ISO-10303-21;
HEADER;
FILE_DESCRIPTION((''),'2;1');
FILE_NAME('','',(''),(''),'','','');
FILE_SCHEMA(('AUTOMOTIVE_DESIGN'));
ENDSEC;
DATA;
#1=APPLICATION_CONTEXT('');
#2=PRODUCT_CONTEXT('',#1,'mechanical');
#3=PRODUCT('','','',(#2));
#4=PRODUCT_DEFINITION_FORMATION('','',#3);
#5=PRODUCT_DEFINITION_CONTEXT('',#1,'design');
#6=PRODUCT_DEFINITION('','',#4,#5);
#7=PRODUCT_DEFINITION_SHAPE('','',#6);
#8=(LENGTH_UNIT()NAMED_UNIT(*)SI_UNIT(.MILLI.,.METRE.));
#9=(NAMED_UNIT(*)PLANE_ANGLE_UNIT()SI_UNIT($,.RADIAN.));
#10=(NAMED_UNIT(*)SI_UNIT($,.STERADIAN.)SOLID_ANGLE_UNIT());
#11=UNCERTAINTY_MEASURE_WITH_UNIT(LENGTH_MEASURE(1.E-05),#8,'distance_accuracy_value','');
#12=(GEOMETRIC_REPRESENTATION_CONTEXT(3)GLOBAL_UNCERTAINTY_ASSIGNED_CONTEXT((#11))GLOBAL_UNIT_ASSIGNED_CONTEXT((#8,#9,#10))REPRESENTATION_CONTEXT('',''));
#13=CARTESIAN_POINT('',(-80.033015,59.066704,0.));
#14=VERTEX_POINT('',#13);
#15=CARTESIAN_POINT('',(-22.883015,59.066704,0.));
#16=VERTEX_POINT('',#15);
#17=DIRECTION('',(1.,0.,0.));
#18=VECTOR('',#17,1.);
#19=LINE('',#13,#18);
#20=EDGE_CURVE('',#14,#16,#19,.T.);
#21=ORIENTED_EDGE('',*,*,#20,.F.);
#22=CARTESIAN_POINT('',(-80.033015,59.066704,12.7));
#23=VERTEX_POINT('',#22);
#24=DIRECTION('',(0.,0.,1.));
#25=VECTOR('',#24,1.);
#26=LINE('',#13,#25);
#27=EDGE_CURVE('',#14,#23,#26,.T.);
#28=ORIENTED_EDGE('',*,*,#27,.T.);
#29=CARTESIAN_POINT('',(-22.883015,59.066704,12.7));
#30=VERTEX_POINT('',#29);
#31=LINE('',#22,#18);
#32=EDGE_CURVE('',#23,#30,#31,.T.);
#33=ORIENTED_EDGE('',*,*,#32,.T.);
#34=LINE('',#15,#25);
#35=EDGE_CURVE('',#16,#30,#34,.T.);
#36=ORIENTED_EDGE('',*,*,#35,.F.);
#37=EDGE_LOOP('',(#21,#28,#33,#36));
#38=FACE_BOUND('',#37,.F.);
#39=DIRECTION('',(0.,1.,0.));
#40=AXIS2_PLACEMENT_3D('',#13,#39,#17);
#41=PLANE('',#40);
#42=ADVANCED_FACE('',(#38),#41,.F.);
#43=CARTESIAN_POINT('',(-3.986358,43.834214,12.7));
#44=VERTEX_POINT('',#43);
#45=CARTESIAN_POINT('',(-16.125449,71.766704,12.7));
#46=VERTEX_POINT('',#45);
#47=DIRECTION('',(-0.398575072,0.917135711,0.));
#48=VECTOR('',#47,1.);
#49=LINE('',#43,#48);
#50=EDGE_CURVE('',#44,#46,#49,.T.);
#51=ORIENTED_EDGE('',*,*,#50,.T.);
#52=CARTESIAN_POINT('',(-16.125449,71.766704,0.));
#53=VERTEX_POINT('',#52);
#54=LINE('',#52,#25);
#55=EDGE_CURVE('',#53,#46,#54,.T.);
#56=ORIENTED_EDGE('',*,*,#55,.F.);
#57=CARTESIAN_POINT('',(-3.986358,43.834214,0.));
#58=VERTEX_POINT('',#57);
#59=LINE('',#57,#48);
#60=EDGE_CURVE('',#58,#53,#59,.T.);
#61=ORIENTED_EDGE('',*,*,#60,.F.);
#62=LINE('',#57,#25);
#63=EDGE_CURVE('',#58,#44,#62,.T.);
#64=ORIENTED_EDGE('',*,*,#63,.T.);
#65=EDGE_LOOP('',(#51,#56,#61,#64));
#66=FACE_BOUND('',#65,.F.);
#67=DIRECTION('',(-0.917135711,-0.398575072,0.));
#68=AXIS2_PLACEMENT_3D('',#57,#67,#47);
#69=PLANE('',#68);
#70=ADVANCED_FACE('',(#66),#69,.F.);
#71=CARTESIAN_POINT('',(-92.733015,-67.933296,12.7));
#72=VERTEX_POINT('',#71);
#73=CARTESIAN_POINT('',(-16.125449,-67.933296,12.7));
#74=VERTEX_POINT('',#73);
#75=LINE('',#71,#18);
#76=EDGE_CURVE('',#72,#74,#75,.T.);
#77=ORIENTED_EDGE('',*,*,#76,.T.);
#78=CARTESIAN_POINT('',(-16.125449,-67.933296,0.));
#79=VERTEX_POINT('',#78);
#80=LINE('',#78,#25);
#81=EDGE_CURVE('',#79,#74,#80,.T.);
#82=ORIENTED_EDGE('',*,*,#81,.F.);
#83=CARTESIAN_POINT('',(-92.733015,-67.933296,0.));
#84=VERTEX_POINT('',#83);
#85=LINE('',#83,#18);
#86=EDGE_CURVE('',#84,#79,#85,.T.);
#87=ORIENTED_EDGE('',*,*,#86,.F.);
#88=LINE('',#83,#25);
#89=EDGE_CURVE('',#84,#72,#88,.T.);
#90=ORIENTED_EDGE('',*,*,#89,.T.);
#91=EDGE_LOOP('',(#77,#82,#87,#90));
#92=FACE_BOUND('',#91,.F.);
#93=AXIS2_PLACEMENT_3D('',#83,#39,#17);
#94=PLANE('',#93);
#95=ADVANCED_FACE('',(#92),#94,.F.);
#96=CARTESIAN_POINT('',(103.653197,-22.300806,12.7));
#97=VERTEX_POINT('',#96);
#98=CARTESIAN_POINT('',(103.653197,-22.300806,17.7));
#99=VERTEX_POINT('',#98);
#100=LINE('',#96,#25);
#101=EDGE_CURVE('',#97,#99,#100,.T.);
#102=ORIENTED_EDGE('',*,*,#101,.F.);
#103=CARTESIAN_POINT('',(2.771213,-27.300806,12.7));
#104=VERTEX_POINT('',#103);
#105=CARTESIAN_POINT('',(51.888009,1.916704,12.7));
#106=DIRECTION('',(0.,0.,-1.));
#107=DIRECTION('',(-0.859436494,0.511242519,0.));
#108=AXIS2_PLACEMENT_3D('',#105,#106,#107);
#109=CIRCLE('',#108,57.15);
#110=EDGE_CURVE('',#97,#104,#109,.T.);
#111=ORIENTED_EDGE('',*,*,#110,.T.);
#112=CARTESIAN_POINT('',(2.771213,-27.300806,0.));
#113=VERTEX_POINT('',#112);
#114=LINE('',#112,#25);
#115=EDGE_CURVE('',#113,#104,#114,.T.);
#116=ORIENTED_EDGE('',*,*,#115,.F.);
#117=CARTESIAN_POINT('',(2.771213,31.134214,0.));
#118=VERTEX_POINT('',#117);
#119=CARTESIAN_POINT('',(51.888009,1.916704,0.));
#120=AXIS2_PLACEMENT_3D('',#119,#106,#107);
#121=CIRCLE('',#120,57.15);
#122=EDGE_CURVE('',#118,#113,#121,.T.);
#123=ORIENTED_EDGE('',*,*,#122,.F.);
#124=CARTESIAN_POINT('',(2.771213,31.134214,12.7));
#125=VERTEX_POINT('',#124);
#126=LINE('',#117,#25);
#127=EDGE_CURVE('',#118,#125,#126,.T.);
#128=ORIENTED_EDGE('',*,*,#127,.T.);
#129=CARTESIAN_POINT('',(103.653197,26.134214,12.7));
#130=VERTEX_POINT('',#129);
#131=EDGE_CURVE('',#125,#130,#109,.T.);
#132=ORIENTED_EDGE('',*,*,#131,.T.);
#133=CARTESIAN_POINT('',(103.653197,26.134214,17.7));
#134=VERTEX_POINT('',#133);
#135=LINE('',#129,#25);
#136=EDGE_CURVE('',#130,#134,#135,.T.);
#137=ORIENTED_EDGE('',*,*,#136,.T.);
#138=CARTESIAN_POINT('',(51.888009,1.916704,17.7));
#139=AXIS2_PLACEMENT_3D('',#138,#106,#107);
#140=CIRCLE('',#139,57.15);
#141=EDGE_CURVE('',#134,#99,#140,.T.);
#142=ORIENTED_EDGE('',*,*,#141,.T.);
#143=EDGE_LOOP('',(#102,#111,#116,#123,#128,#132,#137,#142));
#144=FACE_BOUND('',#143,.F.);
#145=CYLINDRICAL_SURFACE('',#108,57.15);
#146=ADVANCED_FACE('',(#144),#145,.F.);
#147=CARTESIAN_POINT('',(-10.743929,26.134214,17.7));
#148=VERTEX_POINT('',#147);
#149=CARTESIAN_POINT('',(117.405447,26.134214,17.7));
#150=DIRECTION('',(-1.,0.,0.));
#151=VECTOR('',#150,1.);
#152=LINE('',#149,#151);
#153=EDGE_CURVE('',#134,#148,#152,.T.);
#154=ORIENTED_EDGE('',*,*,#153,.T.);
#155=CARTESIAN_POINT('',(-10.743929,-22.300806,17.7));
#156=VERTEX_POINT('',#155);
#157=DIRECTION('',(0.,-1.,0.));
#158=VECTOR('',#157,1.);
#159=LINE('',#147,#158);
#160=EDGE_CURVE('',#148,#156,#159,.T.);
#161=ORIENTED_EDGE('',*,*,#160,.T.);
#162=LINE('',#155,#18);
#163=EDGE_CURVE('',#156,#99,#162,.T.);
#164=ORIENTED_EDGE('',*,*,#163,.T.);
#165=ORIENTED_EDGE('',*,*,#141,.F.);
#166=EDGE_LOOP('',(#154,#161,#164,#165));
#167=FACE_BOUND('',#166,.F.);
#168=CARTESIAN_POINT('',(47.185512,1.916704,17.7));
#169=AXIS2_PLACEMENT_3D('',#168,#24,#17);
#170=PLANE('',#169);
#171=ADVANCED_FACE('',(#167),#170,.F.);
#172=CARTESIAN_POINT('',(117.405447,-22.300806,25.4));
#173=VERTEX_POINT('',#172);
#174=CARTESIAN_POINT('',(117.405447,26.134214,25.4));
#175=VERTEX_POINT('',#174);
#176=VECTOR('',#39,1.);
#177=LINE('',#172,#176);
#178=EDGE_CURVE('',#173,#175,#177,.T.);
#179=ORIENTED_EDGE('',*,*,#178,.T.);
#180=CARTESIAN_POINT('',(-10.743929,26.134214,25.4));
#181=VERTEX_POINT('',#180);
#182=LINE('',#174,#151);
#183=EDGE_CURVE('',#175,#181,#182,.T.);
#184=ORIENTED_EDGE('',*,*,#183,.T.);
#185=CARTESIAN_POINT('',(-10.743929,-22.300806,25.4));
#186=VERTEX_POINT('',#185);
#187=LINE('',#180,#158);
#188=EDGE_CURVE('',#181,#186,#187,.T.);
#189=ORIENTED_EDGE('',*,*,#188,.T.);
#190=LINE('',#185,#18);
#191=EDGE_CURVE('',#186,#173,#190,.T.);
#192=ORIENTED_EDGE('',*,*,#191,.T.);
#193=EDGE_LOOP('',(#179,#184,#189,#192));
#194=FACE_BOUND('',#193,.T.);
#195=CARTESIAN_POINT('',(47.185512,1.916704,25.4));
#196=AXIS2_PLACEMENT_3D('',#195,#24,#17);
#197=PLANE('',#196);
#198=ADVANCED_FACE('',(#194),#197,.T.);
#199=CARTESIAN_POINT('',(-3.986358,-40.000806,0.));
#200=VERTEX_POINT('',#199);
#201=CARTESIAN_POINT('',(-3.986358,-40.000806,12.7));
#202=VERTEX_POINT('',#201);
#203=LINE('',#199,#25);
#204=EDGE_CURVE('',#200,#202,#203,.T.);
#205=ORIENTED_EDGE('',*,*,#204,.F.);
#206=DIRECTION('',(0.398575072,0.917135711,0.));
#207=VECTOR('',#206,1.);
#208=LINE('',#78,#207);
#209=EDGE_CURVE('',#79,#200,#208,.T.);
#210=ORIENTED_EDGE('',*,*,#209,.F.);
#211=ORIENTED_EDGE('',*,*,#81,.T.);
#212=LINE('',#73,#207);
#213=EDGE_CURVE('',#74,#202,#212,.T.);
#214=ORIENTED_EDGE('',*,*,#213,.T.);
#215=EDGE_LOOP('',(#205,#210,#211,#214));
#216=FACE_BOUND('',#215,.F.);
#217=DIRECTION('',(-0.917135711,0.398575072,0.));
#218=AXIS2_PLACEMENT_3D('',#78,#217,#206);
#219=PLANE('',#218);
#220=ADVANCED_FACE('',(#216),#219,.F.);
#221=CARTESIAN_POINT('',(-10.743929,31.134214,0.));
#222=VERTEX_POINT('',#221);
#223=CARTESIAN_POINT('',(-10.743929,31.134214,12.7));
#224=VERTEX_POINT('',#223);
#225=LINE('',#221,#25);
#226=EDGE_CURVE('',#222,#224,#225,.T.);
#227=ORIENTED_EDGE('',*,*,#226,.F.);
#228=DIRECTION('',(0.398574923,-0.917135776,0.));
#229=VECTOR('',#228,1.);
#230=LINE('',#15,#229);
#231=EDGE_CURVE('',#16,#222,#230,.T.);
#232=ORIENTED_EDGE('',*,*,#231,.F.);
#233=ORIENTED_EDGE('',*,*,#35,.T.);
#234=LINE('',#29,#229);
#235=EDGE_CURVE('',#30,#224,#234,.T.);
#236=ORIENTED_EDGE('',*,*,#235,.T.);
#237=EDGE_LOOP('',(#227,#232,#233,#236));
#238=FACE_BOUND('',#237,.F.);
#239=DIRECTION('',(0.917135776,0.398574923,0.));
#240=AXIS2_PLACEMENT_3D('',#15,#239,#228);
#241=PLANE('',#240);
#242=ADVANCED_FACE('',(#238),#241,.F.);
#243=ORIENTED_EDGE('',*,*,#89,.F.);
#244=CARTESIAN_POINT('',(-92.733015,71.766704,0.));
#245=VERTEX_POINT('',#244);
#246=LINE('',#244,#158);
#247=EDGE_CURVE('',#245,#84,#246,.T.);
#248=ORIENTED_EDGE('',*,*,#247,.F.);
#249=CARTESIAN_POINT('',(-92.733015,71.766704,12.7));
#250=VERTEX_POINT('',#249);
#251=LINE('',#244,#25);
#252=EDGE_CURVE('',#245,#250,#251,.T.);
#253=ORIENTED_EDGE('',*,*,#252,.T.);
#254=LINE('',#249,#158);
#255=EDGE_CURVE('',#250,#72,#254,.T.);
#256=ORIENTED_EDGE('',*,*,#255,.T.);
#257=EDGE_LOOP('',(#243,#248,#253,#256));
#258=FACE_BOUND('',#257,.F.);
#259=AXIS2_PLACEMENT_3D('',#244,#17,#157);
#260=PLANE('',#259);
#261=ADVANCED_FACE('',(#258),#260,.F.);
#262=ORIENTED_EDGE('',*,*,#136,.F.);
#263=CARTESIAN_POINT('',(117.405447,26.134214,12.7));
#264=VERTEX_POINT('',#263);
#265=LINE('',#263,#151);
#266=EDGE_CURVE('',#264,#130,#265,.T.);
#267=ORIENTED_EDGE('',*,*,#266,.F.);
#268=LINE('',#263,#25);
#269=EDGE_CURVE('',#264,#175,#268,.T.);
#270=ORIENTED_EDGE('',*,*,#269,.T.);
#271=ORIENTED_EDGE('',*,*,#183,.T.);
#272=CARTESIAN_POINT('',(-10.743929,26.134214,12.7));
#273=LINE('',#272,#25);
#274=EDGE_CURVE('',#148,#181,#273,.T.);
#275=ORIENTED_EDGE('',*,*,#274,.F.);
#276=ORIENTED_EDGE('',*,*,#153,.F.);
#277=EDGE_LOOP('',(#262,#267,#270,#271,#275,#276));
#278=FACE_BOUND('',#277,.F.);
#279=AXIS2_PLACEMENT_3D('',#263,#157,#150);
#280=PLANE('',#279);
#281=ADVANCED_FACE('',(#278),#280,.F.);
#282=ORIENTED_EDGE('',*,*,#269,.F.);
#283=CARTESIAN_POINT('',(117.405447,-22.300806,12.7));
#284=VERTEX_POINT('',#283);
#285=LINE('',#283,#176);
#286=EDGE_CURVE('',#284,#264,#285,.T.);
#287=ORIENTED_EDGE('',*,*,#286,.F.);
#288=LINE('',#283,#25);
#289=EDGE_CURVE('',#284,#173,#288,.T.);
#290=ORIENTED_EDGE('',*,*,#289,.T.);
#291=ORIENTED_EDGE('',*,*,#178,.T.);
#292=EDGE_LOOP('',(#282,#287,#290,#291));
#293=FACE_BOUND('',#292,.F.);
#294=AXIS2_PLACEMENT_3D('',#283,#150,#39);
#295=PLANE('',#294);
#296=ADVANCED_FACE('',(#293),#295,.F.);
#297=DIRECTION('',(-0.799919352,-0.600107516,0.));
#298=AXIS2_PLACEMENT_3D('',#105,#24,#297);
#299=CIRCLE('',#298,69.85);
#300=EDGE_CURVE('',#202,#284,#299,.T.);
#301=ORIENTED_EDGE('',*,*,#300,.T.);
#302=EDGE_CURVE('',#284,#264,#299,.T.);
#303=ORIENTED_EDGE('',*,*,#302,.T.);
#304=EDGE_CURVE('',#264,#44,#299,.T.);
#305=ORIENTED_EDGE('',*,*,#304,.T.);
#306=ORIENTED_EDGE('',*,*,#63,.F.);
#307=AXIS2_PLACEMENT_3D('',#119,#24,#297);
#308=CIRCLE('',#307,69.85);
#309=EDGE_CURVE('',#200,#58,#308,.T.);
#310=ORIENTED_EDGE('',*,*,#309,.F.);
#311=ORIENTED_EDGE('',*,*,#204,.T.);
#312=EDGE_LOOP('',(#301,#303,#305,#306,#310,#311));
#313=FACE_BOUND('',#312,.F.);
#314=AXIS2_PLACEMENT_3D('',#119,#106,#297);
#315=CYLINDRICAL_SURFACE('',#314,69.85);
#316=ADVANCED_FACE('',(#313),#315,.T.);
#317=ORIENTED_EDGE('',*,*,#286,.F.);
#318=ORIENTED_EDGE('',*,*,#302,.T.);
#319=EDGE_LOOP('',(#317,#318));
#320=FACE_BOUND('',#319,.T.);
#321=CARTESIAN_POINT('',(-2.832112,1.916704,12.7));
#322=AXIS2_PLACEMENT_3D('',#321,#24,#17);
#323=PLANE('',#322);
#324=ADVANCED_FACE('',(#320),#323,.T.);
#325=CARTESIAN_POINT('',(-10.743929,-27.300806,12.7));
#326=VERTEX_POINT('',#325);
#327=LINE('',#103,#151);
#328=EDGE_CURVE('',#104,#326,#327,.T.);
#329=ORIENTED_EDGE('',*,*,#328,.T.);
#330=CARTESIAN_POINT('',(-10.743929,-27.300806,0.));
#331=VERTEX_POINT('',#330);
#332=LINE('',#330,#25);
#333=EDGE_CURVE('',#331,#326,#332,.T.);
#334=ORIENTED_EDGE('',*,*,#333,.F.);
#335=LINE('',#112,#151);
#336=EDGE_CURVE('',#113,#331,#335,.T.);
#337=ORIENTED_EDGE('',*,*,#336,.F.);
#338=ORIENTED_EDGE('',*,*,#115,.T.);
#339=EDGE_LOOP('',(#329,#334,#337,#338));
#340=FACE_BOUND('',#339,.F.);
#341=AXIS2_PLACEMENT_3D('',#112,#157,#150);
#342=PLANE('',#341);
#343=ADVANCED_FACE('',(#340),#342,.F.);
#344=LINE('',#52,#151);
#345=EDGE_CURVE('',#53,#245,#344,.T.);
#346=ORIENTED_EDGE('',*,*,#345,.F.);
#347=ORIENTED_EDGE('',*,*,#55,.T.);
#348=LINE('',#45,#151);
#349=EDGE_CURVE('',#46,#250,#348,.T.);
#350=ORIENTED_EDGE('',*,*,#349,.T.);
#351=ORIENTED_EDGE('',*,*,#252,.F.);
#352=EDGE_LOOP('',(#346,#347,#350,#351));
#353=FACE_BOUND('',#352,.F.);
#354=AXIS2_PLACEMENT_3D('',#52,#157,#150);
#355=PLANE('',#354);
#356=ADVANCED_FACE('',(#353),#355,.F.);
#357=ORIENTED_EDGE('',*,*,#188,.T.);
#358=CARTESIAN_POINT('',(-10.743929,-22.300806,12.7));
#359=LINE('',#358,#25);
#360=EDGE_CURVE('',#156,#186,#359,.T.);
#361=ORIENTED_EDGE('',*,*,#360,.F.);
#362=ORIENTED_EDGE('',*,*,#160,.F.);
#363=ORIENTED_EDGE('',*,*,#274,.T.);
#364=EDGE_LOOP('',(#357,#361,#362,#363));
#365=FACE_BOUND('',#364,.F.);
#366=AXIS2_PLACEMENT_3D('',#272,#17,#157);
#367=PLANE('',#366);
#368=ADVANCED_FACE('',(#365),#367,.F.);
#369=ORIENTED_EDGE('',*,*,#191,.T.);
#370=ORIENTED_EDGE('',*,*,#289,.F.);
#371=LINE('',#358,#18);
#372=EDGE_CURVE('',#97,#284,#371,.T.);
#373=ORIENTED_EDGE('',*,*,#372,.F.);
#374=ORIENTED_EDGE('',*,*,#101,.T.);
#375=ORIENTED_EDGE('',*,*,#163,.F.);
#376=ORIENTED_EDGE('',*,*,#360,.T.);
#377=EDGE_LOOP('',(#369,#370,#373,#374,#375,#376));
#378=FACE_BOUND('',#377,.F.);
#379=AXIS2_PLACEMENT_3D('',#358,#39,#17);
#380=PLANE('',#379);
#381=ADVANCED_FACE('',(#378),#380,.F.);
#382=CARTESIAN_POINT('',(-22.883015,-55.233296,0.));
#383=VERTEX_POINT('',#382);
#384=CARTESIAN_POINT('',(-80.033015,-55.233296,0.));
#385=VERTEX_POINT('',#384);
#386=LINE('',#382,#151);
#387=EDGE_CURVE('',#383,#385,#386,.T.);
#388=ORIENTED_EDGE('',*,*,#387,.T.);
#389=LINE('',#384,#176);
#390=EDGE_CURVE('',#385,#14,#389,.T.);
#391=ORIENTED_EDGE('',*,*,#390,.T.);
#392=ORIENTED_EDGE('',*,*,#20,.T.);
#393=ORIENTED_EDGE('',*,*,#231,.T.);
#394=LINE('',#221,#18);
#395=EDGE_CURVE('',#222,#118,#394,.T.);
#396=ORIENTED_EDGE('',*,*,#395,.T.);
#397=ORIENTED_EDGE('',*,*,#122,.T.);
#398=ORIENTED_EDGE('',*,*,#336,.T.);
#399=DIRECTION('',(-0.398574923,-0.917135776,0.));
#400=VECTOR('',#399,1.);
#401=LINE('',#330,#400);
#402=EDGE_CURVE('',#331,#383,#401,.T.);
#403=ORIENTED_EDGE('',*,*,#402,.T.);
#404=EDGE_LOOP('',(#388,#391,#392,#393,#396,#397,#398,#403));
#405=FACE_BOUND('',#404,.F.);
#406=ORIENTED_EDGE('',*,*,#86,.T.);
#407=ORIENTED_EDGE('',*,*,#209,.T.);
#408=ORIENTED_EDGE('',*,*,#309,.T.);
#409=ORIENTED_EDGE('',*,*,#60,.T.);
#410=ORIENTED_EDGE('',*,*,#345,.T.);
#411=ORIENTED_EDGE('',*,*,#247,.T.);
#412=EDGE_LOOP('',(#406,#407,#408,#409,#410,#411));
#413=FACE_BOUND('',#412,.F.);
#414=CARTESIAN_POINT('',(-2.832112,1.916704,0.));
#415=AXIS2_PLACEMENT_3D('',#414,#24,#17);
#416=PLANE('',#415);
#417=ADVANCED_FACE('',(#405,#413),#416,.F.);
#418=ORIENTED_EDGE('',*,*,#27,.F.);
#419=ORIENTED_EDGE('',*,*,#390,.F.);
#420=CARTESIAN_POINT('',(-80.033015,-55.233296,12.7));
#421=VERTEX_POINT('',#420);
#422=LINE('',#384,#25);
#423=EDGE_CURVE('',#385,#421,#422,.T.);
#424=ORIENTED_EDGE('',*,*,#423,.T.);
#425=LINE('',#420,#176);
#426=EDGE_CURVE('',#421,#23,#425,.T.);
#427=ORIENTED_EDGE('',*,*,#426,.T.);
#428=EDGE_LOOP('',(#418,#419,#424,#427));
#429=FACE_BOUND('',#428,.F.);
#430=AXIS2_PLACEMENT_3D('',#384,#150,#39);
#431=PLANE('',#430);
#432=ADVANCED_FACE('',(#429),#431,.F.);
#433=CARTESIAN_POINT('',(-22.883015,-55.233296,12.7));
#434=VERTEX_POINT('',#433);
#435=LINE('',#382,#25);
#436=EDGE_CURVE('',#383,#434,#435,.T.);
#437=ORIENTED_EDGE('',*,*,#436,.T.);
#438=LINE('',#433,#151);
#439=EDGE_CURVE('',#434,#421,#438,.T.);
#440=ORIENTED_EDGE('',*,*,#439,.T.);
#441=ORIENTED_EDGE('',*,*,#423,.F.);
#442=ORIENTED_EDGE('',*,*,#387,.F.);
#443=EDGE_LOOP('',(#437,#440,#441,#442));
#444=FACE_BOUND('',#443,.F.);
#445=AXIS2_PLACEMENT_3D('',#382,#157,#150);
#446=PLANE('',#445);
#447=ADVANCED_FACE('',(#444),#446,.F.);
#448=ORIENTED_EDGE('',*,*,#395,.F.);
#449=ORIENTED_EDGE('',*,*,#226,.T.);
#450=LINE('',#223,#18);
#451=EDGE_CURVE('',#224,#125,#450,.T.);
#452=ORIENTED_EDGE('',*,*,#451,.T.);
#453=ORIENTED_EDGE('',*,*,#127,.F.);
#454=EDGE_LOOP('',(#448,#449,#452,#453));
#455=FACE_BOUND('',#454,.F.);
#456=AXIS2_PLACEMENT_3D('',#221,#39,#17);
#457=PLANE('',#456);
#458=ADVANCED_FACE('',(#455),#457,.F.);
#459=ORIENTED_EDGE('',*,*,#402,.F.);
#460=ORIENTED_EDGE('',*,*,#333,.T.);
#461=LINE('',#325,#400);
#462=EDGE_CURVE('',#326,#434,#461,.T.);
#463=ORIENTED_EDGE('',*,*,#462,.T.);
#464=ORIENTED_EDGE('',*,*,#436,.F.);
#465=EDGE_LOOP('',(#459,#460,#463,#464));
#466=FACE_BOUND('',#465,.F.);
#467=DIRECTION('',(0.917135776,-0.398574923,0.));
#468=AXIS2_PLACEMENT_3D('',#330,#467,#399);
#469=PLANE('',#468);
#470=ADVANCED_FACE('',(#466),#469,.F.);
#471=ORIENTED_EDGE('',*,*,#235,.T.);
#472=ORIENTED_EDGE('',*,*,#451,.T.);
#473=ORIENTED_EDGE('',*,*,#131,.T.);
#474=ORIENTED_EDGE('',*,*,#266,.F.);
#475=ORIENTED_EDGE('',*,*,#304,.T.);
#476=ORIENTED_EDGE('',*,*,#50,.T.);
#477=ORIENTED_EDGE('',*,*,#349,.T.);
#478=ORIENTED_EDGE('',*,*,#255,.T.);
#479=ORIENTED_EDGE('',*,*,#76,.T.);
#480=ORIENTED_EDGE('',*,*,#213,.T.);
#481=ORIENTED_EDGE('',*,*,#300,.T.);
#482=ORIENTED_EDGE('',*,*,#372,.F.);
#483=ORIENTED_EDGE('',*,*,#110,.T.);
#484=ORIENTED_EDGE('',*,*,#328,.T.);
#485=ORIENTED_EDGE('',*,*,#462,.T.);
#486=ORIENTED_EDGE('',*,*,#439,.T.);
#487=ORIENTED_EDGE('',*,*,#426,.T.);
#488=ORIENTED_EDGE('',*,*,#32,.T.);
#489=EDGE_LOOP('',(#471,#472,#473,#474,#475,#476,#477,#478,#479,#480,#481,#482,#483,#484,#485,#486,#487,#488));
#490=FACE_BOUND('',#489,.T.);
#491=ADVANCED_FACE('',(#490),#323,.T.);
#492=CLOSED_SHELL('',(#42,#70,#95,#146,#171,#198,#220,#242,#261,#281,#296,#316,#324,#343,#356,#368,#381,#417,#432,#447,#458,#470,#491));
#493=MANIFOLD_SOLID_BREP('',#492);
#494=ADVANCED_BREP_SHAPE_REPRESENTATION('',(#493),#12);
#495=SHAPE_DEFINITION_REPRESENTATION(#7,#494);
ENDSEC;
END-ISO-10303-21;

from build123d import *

# Parameters (mm, degrees)
F3_DEPTH = 12.7
F5_DEPTH = 12.7
F6_DEPTH = 5


# Not quite as in the source:
# - a feature names something its author has since deleted; it is built from what else it names


with BuildPart() as f3:
    # F2 (on Top) → F3 (new body)
    with BuildSketch(Plane.XY):
        with BuildLine():
            Line((-3.986357704, 43.8342139564), (-16.1254491208, 71.7667039931))
            Line((-16.1254491208, 71.7667039931), (-92.733014825, 71.7667039931))
            Line((-92.733014825, 71.7667039931), (-92.733014825, -67.9332960069))
            Line((-92.733014825, -67.9332960069), (-16.1254491208, -67.9332960069))
            Line((-16.1254491208, -67.9332960069), (-3.986357704, -40.0008059702))
            ThreePointArc((-3.986357704, -40.0008059702), (121.738009035, 1.9167039931), (-3.986357704, 43.8342139564))
        make_face()
        with BuildLine():
            Line((-80.033014825, -55.2332960069), (-80.033014825, 59.0667039931))
            Line((-80.033014825, 59.0667039931), (-22.883014825, 59.0667039931))
            Line((-22.883014825, 59.0667039931), (-10.7439288273, 31.1342139564))
            Line((-10.7439288273, 31.1342139564), (2.7712134193, 31.1342139564))
            ThreePointArc((2.7712134193, 31.1342139564), (109.038009035, 1.9167039931), (2.7712134193, -27.3008059702))
            Line((2.7712134193, -27.3008059702), (-10.7439288273, -27.3008059702))
            Line((-10.7439288273, -27.3008059702), (-22.883014825, -55.2332960069))
            Line((-22.883014825, -55.2332960069), (-80.033014825, -55.2332960069))
        make_face(mode=Mode.SUBTRACT)
    extrude(amount=F3_DEPTH)

    # F4 (on face) → F5 (join)
    with BuildSketch(Plane.XY.offset(12.7)):
        with BuildLine():
            Line((103.6531972523, 26.1342139564), (-10.7439288273, 26.1342139564))
            Line((-10.7439288273, 26.1342139564), (-10.7439288273, -22.3008059702))
            Line((-10.7439288273, -22.3008059702), (103.6531972523, -22.3008059702))
            ThreePointArc((103.6531972523, -22.3008059702), (109.038009035, 1.9167039931), (103.6531972523, 26.1342139564))
        make_face()
        with BuildLine():
            Line((117.405447257, 26.1342139564), (103.6531972523, 26.1342139564))
            ThreePointArc((103.6531972523, 26.1342139564), (109.038009035, 1.9167039931), (103.6531972523, -22.3008059702))
            Line((103.6531972523, -22.3008059702), (117.405447257, -22.3008059702))
            Line((117.405447257, -22.3008059702), (117.405447257, 26.1342139564))
        make_face()
    extrude(amount=F5_DEPTH)

    # F6 (cut): a face of the model
    f6_faces = [f3.faces().sort_by_distance(p)[0] for p in [
        (48.2779564243, 1.9167039931, 12.7),
    ]]
    extrude(f6_faces, amount=-F6_DEPTH, mode=Mode.SUBTRACT)


solid = f3.part
